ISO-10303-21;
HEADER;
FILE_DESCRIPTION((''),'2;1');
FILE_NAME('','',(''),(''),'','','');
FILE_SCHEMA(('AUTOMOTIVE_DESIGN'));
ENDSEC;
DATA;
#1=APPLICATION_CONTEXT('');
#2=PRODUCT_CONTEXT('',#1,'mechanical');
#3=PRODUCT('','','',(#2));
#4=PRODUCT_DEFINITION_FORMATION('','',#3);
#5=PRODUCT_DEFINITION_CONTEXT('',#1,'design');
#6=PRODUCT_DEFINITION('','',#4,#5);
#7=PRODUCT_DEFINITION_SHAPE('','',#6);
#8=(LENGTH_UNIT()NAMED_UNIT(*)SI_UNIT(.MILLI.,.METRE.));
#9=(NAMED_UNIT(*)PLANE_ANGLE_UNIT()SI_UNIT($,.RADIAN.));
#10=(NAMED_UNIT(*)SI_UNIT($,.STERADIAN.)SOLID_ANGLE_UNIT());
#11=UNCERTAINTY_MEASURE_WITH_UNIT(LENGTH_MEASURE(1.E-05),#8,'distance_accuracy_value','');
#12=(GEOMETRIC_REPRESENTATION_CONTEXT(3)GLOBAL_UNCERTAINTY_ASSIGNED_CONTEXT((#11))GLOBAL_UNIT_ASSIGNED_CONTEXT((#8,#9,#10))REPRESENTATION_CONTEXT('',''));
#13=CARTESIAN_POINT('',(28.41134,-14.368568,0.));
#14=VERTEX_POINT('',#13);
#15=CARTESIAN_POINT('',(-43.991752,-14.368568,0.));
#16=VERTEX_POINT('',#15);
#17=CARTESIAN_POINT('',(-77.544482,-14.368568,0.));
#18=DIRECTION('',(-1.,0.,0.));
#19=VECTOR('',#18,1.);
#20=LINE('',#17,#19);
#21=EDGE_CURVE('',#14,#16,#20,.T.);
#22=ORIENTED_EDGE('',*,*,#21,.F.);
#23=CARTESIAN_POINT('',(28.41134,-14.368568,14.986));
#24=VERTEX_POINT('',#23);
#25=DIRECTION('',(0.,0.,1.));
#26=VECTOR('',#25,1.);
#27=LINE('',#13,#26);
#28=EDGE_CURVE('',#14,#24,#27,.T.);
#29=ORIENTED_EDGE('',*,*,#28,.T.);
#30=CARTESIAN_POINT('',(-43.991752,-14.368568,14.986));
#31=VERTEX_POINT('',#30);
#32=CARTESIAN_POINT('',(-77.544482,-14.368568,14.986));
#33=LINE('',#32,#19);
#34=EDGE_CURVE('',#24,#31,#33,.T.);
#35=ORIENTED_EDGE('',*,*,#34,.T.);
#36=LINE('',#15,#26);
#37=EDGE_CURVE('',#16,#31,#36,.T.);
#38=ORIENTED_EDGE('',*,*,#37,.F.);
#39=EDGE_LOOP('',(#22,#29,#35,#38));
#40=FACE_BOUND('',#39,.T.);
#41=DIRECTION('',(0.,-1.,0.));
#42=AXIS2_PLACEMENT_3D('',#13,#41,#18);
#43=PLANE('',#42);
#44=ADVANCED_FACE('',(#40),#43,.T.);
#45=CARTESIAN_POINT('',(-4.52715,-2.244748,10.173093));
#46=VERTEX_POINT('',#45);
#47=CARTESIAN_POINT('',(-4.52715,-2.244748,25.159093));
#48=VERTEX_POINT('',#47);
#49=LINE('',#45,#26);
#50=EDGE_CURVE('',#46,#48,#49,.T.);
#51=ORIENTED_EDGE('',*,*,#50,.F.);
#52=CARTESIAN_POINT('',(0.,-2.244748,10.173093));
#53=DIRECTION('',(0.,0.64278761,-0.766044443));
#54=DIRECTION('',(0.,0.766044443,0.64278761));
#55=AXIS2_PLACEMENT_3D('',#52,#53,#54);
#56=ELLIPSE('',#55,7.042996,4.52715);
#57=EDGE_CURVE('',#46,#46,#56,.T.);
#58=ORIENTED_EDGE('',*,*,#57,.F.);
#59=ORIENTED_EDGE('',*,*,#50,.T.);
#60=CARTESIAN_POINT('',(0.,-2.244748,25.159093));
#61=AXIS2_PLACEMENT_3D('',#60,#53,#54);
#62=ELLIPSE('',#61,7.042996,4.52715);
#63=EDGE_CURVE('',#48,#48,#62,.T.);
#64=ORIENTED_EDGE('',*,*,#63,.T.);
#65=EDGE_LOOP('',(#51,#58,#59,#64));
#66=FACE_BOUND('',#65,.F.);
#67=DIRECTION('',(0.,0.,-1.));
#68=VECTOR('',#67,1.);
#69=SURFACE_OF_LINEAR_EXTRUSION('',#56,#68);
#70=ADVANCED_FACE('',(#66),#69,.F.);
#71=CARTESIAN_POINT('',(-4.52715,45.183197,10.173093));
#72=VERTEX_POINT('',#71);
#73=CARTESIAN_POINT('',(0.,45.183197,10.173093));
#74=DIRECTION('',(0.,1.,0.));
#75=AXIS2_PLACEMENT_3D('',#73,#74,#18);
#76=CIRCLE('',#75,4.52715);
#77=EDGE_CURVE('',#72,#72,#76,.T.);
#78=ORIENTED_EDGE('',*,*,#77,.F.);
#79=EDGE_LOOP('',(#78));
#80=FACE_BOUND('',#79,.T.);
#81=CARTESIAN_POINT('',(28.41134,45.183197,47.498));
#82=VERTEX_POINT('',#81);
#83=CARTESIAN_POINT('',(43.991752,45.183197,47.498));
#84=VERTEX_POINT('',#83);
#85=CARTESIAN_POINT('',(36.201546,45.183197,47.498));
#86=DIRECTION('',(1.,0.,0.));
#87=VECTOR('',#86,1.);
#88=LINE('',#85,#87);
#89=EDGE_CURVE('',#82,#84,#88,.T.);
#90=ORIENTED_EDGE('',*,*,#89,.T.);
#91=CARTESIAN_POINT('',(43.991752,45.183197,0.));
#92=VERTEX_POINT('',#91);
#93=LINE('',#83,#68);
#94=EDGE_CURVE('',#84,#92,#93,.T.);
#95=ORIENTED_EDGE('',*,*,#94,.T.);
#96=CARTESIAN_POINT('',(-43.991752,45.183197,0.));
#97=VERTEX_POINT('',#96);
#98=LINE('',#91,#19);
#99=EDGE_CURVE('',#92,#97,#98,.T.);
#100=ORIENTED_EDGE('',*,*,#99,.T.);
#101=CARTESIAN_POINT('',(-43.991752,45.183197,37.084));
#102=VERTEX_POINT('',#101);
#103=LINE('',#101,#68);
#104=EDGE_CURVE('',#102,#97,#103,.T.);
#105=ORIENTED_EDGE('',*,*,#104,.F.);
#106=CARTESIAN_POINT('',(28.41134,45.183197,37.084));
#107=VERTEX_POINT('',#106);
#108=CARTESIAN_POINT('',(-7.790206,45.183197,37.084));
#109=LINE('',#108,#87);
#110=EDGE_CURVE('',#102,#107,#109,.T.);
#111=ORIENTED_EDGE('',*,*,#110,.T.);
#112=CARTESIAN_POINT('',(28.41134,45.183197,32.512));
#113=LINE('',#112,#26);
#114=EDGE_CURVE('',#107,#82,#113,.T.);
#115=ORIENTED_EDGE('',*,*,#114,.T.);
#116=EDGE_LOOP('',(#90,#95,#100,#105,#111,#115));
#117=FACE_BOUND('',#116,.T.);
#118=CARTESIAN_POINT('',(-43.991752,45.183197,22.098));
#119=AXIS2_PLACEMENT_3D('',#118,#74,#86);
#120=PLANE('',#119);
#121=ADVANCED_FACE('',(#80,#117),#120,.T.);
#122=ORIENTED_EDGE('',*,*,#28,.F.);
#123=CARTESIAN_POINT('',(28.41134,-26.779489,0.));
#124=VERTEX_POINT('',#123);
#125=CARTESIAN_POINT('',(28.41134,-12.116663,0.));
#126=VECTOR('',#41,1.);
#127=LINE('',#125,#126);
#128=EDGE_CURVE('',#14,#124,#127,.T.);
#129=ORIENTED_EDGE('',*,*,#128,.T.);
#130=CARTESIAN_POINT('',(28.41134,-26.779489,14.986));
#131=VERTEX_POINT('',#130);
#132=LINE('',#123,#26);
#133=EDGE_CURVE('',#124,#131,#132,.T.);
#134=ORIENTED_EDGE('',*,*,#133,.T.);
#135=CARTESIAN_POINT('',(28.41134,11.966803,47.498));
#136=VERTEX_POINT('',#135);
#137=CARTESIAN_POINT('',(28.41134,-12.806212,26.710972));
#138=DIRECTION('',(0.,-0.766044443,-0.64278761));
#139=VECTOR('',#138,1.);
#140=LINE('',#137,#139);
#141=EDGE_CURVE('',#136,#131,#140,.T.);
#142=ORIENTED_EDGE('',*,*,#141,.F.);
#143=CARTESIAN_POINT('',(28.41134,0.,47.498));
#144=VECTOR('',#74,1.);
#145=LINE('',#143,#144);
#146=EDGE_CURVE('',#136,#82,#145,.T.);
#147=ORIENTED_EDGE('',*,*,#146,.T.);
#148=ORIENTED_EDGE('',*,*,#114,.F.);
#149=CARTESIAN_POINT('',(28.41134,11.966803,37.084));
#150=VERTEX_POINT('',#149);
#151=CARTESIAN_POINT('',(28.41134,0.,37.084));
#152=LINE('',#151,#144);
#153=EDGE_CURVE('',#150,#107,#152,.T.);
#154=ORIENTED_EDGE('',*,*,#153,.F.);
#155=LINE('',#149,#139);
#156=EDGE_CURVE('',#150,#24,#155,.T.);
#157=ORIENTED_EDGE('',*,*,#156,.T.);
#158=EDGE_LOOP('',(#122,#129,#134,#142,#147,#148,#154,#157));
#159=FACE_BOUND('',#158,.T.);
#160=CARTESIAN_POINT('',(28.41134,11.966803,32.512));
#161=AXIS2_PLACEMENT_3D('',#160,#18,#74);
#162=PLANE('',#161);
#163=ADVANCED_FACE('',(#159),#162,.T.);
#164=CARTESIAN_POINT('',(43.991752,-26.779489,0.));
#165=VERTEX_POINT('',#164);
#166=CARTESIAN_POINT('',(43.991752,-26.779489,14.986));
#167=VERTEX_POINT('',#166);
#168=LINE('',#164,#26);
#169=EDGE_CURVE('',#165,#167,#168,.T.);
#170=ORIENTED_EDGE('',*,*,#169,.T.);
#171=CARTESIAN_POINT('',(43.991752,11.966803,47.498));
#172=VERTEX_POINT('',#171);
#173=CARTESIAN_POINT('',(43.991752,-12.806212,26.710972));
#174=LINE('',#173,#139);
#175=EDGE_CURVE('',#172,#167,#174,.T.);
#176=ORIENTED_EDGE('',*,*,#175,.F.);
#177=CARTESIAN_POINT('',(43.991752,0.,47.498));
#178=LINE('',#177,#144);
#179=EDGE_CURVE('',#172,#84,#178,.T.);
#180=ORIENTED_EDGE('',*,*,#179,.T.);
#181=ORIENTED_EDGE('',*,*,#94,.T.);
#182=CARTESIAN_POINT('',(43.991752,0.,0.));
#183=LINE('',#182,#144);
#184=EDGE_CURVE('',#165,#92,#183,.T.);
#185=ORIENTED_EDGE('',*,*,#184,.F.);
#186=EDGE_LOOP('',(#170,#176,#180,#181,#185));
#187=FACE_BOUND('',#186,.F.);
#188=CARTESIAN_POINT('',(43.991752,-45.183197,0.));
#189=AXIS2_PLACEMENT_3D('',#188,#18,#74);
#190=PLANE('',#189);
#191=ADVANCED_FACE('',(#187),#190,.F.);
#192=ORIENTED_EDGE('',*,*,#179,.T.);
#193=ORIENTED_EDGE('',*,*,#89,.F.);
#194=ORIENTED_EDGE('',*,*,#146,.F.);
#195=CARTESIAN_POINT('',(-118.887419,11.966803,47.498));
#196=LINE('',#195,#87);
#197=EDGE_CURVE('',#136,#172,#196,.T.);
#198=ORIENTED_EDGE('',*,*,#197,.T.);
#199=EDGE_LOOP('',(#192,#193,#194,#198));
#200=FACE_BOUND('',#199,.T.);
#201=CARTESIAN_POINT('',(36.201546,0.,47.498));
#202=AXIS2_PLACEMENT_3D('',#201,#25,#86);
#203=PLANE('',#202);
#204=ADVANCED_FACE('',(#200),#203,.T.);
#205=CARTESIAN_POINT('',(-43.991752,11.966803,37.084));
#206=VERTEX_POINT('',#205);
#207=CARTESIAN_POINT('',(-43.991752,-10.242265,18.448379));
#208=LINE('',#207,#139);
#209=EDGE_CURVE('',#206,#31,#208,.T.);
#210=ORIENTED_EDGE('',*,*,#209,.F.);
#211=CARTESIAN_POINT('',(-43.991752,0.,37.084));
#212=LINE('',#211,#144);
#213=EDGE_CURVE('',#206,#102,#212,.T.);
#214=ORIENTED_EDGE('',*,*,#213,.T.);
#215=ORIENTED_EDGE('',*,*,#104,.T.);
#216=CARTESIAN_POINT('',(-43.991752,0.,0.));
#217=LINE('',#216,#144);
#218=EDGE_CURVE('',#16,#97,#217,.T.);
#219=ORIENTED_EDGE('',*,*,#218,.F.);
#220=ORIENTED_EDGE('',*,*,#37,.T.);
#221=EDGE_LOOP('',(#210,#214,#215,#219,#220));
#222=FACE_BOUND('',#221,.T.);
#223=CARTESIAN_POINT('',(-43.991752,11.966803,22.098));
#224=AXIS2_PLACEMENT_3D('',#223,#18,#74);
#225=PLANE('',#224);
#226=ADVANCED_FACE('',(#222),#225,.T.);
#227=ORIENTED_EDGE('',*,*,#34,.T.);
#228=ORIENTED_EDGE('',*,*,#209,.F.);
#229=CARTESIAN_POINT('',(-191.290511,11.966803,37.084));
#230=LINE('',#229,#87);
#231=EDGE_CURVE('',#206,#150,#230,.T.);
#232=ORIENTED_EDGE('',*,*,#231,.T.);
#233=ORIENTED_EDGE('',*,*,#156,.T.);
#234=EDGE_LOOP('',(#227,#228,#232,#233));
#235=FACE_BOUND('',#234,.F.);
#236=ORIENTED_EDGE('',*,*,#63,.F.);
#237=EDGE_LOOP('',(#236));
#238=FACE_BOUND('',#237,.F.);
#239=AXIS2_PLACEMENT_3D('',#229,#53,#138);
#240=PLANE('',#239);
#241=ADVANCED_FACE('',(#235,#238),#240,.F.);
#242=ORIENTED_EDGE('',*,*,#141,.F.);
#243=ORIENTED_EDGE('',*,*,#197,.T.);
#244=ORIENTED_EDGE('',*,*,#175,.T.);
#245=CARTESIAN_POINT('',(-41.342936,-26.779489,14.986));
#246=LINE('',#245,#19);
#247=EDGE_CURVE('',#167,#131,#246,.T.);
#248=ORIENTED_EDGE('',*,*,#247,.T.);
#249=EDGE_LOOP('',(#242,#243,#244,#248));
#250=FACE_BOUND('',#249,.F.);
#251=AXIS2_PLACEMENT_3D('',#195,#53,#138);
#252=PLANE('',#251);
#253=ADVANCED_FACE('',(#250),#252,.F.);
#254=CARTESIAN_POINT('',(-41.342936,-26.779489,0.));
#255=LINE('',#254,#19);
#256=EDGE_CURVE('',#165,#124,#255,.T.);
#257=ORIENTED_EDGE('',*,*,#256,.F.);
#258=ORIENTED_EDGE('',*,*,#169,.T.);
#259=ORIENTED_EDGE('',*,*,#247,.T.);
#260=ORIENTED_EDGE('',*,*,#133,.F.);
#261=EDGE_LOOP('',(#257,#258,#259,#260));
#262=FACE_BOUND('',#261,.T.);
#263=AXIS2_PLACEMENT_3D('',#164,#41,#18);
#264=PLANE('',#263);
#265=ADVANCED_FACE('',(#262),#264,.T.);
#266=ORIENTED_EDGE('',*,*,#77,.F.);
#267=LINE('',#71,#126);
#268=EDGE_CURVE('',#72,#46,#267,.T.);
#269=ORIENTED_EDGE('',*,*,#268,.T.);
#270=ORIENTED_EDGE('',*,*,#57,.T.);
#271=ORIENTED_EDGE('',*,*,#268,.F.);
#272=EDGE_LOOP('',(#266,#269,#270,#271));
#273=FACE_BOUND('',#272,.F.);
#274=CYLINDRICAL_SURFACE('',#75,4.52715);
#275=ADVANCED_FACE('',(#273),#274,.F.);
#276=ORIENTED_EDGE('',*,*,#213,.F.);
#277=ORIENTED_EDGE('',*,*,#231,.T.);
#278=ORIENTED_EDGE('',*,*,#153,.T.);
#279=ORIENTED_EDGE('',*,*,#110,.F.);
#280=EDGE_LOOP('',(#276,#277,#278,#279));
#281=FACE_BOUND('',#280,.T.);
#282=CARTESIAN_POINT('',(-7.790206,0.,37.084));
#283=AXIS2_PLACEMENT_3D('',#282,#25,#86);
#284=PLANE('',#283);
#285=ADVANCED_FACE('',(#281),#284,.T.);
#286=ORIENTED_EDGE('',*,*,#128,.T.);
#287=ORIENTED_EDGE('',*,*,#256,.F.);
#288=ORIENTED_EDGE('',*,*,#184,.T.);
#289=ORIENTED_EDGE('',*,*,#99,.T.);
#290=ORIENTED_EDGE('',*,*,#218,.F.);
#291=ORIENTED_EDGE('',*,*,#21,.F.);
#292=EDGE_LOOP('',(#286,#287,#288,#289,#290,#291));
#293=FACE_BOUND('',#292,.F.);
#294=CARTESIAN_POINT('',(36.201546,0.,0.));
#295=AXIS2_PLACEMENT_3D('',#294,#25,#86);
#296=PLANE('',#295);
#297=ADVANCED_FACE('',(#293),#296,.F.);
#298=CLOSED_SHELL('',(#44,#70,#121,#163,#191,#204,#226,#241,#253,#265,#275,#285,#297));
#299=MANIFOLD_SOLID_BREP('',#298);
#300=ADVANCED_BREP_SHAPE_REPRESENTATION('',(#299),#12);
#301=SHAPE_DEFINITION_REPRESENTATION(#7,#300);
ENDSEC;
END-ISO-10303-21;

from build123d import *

# Parameters (mm, degrees)
F0_W        = 72.4030919373
F0_H        = 90.3663933277
F2_DEPTH    = 22.098
F1_W        = 15.5804120004
F1_H        = 90.3663933277
F3_DEPTH    = 32.512
F4_T1_DEPTH = 219.7018507435
F5_T1_DEPTH = 310.1779296127
F6_R        = 4.5271504528
F7_DEPTH    = 71.9636861302
F8_DEPTH    = 14.986


# Not quite as in the source:
# - a fillet or chamfer that OpenCascade refuses, or shapes differently, is made with other operations: its cross-section is extruded or revolved along the edge and cut away or added


with BuildPart() as f2:
    # F0 (on Top) → F2 (new body)
    with BuildSketch(Plane.XY):
        with Locations((-7.7902060002, 0)):
            Rectangle(F0_W, F0_H)
    extrude(amount=F2_DEPTH)

    # F1 (on face) → F3 (join)
    with BuildSketch(Plane.XY):
        with Locations((36.2015459687, 0)):
            Rectangle(F1_W, F1_H)
    extrude(amount=F3_DEPTH)

    # F4: chamfer of 57.15 x 47.9545439218 on 1 edges, made by hand

    # F4_s2 → F4_t1 (cut)
    with BuildSketch(Plane.YZ.offset(-191.290510775)):
        Polygon((11.9668033361, 22.098), (-45.1831966639, -25.8565439218), (-45.1831966639, 22.098), align=None)
    extrude(amount=F4_T1_DEPTH, mode=Mode.SUBTRACT)

    # F5: chamfer of 57.15 x 47.9545439218 on 1 edges, made by hand

    # F5_s2 → F5_t1 (cut)
    with BuildSketch(Plane.YZ.offset(-118.8874188377)):
        Polygon((11.9668033361, 32.512), (-45.1831966639, -15.4425439218), (-45.1831966639, 32.512), align=None)
    extrude(amount=F5_T1_DEPTH, mode=Mode.SUBTRACT)

    # F6 (on face) → F7 (cut, through all)
    with BuildSketch(Plane(origin=(0, 45.1831966639, 0), x_dir=(-1, 0, 0), z_dir=(0, 1, 0))):
        with Locations((0, 10.1730925962)):
            Circle(F6_R)
    extrude(amount=-F7_DEPTH, mode=Mode.SUBTRACT)

    # F8 (add): faces of the model
    f8_faces = [f2.faces().sort_by_distance(p)[0] for p in [
        (-7.7902060002, 28.575, 22.098),
        (-8.1168519447, -1.1571124664, 11.0857270906),
        (36.2015459687, -7.4063430651, 16.256),
        (36.2015459687, 28.575, 32.512),
    ]]
    extrude(f8_faces, amount=F8_DEPTH, dir=(0, 0, 1))


solid = f2.part
